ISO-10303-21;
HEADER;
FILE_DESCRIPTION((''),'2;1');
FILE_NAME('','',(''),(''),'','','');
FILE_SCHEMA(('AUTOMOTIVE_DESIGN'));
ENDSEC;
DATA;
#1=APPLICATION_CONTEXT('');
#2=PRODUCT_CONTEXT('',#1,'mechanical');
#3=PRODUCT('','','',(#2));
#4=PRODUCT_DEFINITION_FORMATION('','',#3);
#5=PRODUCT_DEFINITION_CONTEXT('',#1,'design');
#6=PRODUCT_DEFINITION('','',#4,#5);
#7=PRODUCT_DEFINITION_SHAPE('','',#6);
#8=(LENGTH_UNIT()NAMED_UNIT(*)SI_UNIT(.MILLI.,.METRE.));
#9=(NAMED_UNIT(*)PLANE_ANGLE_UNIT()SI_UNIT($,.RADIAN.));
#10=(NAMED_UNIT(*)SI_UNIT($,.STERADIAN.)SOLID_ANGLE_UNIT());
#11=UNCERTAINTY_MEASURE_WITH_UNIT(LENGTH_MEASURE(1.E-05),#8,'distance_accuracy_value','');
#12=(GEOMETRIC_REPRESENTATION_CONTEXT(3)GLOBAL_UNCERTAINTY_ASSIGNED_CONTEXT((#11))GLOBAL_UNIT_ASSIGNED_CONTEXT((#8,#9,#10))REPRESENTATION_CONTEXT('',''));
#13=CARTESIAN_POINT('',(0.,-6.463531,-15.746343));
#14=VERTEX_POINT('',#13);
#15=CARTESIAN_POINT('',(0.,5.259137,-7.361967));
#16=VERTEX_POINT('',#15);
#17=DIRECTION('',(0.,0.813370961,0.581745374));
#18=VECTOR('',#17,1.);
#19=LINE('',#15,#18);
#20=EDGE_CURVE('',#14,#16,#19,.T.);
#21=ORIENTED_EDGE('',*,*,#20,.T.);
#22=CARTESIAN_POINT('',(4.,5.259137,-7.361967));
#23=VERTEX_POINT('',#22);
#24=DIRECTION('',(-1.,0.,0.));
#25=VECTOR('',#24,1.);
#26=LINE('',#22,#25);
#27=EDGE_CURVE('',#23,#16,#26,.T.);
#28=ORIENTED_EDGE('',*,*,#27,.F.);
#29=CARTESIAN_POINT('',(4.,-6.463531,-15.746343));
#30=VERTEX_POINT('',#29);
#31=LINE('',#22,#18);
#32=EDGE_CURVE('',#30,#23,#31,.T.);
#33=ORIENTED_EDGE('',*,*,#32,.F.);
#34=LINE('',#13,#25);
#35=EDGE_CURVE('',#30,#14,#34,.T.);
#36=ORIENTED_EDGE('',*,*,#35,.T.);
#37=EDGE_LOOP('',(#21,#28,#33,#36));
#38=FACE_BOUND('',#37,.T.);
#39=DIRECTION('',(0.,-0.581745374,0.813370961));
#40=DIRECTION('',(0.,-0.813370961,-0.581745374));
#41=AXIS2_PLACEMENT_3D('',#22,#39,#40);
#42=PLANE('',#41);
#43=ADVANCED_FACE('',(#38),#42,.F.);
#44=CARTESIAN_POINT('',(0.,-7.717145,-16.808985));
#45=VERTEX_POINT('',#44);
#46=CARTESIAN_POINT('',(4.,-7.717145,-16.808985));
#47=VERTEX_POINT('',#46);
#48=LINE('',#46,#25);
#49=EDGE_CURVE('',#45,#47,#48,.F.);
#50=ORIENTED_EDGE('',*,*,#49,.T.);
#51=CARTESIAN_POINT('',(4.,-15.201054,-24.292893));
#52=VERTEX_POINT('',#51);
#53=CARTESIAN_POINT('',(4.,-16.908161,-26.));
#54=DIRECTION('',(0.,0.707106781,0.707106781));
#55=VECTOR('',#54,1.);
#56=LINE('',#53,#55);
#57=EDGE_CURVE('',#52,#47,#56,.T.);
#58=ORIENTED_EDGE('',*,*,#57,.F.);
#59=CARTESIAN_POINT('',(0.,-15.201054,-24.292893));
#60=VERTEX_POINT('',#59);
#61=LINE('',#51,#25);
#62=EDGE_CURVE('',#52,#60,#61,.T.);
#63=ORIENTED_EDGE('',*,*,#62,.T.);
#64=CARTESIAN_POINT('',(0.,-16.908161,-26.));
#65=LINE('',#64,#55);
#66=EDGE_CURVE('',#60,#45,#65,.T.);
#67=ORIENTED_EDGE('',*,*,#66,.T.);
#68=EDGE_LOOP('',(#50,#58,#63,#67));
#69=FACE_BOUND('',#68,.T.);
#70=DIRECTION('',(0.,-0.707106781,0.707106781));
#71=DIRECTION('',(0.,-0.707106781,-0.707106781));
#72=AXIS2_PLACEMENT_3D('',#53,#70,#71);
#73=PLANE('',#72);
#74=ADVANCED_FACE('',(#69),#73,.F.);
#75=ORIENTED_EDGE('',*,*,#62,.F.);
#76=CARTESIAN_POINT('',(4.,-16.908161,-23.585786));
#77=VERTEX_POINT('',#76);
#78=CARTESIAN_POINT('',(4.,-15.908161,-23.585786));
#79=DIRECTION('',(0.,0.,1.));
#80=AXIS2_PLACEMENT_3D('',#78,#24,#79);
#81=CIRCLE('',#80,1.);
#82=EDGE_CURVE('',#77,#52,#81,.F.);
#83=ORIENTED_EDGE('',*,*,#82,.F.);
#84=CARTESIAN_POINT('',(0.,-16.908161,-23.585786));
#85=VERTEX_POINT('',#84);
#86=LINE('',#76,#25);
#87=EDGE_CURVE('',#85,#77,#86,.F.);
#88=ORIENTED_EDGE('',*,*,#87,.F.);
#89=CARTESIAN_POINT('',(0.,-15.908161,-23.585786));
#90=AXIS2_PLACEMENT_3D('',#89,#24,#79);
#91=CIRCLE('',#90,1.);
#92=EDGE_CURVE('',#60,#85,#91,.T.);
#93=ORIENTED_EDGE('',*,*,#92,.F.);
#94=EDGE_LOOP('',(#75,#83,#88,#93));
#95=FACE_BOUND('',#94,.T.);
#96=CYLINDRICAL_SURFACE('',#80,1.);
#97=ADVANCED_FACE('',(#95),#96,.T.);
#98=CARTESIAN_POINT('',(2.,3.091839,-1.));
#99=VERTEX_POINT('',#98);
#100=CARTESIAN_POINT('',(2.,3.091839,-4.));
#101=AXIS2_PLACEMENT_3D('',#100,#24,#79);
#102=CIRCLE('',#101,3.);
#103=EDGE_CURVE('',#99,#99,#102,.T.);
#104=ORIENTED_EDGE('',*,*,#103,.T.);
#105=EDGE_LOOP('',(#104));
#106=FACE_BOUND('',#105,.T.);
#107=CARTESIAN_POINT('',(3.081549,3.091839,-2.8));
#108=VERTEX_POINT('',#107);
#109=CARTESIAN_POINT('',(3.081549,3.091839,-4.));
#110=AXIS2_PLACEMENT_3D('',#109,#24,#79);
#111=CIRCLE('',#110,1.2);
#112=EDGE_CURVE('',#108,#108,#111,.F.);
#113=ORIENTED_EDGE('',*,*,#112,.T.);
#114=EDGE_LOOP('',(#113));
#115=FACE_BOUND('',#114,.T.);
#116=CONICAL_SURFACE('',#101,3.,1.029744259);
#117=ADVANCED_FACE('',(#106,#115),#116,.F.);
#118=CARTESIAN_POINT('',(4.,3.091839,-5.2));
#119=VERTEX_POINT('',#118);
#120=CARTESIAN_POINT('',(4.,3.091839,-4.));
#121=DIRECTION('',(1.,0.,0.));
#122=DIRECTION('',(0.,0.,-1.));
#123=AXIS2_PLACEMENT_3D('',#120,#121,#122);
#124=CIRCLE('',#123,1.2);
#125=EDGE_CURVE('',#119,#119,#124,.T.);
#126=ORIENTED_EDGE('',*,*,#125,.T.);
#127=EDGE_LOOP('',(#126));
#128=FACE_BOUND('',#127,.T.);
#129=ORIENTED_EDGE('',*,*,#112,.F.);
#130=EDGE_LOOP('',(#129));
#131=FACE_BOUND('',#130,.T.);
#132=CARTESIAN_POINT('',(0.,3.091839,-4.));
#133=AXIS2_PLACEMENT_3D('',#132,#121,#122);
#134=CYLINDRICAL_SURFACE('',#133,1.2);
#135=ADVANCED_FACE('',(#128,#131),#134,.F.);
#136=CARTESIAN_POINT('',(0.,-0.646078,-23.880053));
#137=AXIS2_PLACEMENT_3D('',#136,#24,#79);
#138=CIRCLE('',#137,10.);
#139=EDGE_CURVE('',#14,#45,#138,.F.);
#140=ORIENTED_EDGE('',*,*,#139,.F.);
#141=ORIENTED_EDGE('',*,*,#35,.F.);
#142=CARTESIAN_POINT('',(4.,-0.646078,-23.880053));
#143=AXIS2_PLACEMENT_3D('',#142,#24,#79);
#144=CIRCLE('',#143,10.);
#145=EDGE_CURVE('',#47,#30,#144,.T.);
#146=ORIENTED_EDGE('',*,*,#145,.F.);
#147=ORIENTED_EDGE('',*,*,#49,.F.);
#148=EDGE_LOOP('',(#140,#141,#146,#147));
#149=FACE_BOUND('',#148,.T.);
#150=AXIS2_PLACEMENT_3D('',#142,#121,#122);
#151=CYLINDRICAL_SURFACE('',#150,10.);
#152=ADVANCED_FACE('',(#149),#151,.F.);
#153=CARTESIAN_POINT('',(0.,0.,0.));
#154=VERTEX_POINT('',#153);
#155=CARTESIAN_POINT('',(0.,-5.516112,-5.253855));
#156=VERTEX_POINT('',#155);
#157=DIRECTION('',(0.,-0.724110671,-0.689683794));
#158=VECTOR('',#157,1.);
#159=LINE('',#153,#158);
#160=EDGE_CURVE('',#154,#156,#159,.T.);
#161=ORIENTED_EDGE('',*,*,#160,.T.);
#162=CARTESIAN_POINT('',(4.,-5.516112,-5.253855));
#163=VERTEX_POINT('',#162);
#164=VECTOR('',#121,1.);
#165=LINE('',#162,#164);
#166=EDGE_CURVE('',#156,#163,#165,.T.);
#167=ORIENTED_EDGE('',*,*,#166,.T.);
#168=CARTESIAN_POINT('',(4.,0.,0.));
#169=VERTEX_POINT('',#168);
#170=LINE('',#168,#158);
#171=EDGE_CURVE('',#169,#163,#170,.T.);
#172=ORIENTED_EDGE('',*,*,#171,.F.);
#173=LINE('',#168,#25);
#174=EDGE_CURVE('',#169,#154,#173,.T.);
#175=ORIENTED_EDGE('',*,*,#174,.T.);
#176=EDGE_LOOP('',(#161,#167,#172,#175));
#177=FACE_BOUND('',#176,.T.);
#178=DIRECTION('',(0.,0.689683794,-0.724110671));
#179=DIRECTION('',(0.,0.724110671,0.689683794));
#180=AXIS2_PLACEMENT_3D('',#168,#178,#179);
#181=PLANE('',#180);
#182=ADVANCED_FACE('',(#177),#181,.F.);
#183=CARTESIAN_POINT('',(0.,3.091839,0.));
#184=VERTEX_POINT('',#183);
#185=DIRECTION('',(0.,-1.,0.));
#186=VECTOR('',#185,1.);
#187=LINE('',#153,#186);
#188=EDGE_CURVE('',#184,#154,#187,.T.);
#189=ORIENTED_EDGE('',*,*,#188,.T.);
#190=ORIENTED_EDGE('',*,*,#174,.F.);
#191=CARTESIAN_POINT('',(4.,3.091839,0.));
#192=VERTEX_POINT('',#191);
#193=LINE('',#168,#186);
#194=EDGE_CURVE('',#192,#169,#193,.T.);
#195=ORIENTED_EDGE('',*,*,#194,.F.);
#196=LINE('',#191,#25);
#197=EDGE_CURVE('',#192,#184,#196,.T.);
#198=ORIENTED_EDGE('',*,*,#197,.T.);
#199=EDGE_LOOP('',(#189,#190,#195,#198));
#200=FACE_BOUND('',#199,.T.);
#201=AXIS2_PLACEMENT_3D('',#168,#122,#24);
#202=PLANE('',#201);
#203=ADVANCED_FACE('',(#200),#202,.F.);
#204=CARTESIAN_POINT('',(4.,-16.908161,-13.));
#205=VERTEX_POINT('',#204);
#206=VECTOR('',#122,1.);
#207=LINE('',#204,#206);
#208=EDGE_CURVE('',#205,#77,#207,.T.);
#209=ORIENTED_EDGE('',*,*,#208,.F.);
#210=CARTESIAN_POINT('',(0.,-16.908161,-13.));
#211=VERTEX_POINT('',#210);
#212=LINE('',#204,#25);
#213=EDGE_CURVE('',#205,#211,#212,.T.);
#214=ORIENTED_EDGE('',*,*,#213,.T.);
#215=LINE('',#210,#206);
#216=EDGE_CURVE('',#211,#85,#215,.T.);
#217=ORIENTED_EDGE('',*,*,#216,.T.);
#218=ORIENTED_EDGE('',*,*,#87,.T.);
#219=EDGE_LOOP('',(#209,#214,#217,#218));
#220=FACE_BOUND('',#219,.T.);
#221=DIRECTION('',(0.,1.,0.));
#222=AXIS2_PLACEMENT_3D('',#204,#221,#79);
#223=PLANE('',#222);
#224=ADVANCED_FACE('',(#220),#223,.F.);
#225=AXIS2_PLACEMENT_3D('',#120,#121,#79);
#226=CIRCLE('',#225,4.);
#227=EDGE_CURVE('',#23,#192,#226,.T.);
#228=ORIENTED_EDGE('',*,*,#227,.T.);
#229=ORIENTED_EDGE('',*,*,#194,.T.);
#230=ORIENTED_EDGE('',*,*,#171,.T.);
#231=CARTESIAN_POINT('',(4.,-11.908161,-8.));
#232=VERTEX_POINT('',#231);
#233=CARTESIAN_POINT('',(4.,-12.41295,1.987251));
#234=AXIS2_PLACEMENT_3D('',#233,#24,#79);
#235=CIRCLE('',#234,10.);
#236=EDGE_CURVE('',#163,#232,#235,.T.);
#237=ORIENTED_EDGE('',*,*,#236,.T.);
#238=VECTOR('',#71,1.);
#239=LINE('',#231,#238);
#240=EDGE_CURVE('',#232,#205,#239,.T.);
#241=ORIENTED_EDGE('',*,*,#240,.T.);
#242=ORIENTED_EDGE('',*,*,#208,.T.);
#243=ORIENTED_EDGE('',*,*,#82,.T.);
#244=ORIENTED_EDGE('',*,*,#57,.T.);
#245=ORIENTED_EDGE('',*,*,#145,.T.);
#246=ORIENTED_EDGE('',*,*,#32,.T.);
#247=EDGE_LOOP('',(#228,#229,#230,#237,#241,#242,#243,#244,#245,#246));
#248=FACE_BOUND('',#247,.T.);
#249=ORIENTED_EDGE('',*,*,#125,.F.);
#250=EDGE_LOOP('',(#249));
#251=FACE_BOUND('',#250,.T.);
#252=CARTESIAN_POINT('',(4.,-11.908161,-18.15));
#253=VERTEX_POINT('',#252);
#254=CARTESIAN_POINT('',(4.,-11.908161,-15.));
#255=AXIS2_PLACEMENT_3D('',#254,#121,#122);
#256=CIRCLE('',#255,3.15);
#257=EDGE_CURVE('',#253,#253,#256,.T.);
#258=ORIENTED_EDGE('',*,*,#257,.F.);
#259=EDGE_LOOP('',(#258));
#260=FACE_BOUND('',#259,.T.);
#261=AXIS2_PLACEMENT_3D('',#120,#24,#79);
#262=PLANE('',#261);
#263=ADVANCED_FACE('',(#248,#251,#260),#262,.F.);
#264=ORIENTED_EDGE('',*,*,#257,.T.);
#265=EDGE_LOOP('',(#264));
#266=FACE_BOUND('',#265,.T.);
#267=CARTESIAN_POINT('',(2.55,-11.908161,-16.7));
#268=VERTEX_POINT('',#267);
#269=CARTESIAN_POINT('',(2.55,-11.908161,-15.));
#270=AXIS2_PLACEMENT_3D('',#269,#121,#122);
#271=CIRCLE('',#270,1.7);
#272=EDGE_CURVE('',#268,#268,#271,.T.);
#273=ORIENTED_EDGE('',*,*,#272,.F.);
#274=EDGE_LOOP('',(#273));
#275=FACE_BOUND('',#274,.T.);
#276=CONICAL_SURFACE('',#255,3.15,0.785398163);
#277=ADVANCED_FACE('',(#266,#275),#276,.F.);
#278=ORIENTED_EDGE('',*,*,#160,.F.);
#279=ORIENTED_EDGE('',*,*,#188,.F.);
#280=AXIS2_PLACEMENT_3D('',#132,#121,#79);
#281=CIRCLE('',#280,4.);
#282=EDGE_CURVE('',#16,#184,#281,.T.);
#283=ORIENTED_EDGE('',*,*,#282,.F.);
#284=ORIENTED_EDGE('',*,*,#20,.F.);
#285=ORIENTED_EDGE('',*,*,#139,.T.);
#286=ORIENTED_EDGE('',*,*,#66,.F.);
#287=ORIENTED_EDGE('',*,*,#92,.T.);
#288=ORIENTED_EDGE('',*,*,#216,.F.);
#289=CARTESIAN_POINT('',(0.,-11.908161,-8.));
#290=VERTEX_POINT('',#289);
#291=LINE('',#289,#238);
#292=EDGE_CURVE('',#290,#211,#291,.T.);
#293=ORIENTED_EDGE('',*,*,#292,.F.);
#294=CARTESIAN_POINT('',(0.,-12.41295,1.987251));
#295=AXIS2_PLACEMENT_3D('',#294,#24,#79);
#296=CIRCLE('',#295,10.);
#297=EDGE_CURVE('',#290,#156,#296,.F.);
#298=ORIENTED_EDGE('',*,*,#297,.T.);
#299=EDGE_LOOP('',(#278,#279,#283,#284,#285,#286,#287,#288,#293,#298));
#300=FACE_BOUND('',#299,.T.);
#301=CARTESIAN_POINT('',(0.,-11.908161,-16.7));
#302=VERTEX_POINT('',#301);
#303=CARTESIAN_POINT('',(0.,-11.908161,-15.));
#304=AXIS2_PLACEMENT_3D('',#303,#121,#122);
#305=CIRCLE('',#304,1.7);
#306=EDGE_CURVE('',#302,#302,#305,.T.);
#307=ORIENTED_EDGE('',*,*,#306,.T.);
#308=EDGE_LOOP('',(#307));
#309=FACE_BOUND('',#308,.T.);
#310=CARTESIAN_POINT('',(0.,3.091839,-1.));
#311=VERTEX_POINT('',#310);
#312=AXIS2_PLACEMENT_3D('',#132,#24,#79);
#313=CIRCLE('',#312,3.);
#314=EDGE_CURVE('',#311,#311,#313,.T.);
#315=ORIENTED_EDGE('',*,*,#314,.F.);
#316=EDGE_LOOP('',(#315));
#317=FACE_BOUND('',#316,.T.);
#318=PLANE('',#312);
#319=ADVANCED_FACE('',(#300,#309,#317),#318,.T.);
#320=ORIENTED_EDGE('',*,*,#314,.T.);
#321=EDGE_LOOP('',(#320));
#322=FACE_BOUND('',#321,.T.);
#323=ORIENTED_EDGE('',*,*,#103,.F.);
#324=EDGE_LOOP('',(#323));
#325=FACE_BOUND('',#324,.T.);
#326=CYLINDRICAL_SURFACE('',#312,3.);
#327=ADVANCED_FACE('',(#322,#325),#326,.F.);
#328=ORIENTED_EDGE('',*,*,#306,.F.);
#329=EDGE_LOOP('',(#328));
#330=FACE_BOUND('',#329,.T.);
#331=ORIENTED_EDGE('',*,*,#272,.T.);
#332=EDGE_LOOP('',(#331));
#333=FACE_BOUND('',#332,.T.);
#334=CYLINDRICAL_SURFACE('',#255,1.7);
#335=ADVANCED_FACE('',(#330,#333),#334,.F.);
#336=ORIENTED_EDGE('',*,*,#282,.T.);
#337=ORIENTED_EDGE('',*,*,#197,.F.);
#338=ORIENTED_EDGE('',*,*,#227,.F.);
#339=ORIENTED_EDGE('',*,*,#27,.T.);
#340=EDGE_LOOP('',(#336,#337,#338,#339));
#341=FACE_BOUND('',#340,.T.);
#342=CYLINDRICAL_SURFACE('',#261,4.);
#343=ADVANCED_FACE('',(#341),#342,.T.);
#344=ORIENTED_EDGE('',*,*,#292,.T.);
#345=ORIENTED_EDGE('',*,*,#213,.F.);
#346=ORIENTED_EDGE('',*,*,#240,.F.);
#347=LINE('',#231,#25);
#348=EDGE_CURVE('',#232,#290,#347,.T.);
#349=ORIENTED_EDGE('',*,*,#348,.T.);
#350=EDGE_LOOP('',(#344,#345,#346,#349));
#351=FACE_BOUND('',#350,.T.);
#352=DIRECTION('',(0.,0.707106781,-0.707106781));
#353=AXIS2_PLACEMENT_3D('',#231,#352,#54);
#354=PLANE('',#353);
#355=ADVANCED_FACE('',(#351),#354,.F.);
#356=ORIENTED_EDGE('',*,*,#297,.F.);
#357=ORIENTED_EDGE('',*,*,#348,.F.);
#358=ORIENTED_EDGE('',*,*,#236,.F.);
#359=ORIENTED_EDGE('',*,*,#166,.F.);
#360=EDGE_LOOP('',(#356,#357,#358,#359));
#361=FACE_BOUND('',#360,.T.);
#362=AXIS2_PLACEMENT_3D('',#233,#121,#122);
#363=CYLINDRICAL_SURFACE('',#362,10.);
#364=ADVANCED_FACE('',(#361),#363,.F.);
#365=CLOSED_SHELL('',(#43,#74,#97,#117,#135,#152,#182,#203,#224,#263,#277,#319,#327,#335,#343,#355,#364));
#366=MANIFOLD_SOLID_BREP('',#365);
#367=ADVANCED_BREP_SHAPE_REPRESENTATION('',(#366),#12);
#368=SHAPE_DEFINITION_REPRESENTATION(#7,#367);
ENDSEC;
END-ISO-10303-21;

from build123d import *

# Parameters (mm, degrees)
RESSALTO_EXTRUS_O1_DEPTH                             = 4
FURO_DE_DI_METRO_6_0_6_1_D                           = 6
FURO_DE_DI_METRO_6_0_6_1_DEPTH                       = 2
FURO_DE_DI_METRO_6_0_6_1_TIP                         = 1.802581857
ESBO_O4_R                                            = 1.2
CORTE_EXTRUS_O1_DEPTH                                = 32.271167096
ESCAREADO_PARA_PARAFUSO_COM_CABE_A_ESCAR_D           = 3.4
ESCAREADO_PARA_PARAFUSO_COM_CABE_A_ESCAR_CSINK_D     = 6.3
ESCAREADO_PARA_PARAFUSO_COM_CABE_A_ESCAR_CSINK_ANGLE = 90
FILETE1_R                                            = 10
FILETE2_R                                            = 1


with BuildPart() as part:
    # Esboço1 → Ressalto-extrusão1 (new body)
    with BuildSketch(Plane(origin=(0, 0, 0), x_dir=(0, 0, -1), z_dir=(1, 0, 0))):
        with BuildLine():
            Line((0, 0), (0, 3.091839499))
            ThreePointArc((0, 3.091839499), (2.870368785, 6.92901728), (7.361966659, 5.259137398))
            Line((7.361966659, 5.259137398), (16.225984495, -7.134144996))
            Line((16.225984495, -7.134144996), (26, -16.908160501))
            Line((26, -16.908160501), (13, -16.908160501))
            Line((13, -16.908160501), (8, -11.908160501))
            Line((8, -11.908160501), (8, -8.399335203))
            Line((8, -8.399335203), (0, 0))
        make_face()
    extrude(amount=RESSALTO_EXTRUS_O1_DEPTH)

    # Furo de diâmetro Ø6.0 (6)1
    with Locations(Plane.ZY):
        with Locations((-4, 3.091839499)):
            Hole(FURO_DE_DI_METRO_6_0_6_1_D / 2, depth=FURO_DE_DI_METRO_6_0_6_1_DEPTH)
            with Locations((0, 0, -(FURO_DE_DI_METRO_6_0_6_1_DEPTH + FURO_DE_DI_METRO_6_0_6_1_TIP / 2))):  # 118° drill point
                Cone(0, FURO_DE_DI_METRO_6_0_6_1_D / 2, FURO_DE_DI_METRO_6_0_6_1_TIP, mode=Mode.SUBTRACT)

    # Esboço4 → Corte-extrusão1 (cut, through all)
    with BuildSketch(Plane(origin=(4, 0, 0), x_dir=(0, 0, -1), z_dir=(1, 0, 0))):
        with Locations((4, 3.091839499)):
            Circle(ESBO_O4_R)
    extrude(amount=-CORTE_EXTRUS_O1_DEPTH, mode=Mode.SUBTRACT)

    # Escareado para parafuso com cabeça escareada chata de M31 (through all)
    with Locations(Plane(origin=(4, 0, 0), x_dir=(0, 0, -1), z_dir=(1, 0, 0))):
        with Locations((15, -11.908160501)):
            CounterSinkHole(ESCAREADO_PARA_PARAFUSO_COM_CABE_A_ESCAR_D / 2, ESCAREADO_PARA_PARAFUSO_COM_CABE_A_ESCAR_CSINK_D / 2, counter_sink_angle=ESCAREADO_PARA_PARAFUSO_COM_CABE_A_ESCAR_CSINK_ANGLE)

    # Filete1
    # the kernel refuses this fillet: 10 mm, written as the material it adds along each edge
    with BuildSketch(Plane(origin=(0, -8.399335203, -8), x_dir=(0, 0.724110671276106, 0.6896837940274276), z_dir=(1, 0, 0))) as filete1_piece_1:
        with BuildLine():
            CenterArc((3.981744366, 10), FILETE1_R, 229.288374317, 40.711625683)
            Line((-2.540777842, 2.419979944), (-2.671228286, 2.268379543))
            ThreePointArc((-2.671228286, 2.268379543), (-1.40832568, 1.065167838), (-0.137936759, -0.144822134))
            Line((-0.137936759, -0.144822134), (0, -0.2))
            Line((0, -0.2), (3.981744366, -0.2))
            Line((3.981744366, -0.2), (3.981744366, 0))
        make_face()
    extrude(amount=4)
    with BuildSketch(Plane(origin=(0, -7.134144996, -16.225984495), x_dir=(0, -0.7071067811865512, -0.7071067811865437), z_dir=(1, 0, 0))) as filete1_piece_2:
        with BuildLine():
            CenterArc((FILETE1_R * 0.0824486959728, FILETE1_R), FILETE1_R, 260.573396821, 9.426603179)
            Line((-FILETE1_R * 0.0813353269941, FILETE1_R * 0.0135037791148), (-FILETE1_R * 0.0846110074534, -FILETE1_R * 0.00622614530291))
            Line((-FILETE1_R * 0.0846110074534, -FILETE1_R * 0.00622614530291), (-FILETE1_R * 0.00164897391946, -FILETE1_R * 0.02))
            Line((-FILETE1_R * 0.00164897391946, -FILETE1_R * 0.02), (FILETE1_R * 0.0824486959728, -FILETE1_R * 0.02))
            Line((FILETE1_R * 0.0824486959728, -FILETE1_R * 0.02), (FILETE1_R * 0.0824486959728, 0))
        make_face()
    extrude(amount=4)

    # Filete2
    filete2_edges = [part.edges().sort_by_distance(p)[0] for p in [
        (2, -16.908160501, -26),
    ]]
    fillet(filete2_edges, radius=FILETE2_R)


solid = part.part
